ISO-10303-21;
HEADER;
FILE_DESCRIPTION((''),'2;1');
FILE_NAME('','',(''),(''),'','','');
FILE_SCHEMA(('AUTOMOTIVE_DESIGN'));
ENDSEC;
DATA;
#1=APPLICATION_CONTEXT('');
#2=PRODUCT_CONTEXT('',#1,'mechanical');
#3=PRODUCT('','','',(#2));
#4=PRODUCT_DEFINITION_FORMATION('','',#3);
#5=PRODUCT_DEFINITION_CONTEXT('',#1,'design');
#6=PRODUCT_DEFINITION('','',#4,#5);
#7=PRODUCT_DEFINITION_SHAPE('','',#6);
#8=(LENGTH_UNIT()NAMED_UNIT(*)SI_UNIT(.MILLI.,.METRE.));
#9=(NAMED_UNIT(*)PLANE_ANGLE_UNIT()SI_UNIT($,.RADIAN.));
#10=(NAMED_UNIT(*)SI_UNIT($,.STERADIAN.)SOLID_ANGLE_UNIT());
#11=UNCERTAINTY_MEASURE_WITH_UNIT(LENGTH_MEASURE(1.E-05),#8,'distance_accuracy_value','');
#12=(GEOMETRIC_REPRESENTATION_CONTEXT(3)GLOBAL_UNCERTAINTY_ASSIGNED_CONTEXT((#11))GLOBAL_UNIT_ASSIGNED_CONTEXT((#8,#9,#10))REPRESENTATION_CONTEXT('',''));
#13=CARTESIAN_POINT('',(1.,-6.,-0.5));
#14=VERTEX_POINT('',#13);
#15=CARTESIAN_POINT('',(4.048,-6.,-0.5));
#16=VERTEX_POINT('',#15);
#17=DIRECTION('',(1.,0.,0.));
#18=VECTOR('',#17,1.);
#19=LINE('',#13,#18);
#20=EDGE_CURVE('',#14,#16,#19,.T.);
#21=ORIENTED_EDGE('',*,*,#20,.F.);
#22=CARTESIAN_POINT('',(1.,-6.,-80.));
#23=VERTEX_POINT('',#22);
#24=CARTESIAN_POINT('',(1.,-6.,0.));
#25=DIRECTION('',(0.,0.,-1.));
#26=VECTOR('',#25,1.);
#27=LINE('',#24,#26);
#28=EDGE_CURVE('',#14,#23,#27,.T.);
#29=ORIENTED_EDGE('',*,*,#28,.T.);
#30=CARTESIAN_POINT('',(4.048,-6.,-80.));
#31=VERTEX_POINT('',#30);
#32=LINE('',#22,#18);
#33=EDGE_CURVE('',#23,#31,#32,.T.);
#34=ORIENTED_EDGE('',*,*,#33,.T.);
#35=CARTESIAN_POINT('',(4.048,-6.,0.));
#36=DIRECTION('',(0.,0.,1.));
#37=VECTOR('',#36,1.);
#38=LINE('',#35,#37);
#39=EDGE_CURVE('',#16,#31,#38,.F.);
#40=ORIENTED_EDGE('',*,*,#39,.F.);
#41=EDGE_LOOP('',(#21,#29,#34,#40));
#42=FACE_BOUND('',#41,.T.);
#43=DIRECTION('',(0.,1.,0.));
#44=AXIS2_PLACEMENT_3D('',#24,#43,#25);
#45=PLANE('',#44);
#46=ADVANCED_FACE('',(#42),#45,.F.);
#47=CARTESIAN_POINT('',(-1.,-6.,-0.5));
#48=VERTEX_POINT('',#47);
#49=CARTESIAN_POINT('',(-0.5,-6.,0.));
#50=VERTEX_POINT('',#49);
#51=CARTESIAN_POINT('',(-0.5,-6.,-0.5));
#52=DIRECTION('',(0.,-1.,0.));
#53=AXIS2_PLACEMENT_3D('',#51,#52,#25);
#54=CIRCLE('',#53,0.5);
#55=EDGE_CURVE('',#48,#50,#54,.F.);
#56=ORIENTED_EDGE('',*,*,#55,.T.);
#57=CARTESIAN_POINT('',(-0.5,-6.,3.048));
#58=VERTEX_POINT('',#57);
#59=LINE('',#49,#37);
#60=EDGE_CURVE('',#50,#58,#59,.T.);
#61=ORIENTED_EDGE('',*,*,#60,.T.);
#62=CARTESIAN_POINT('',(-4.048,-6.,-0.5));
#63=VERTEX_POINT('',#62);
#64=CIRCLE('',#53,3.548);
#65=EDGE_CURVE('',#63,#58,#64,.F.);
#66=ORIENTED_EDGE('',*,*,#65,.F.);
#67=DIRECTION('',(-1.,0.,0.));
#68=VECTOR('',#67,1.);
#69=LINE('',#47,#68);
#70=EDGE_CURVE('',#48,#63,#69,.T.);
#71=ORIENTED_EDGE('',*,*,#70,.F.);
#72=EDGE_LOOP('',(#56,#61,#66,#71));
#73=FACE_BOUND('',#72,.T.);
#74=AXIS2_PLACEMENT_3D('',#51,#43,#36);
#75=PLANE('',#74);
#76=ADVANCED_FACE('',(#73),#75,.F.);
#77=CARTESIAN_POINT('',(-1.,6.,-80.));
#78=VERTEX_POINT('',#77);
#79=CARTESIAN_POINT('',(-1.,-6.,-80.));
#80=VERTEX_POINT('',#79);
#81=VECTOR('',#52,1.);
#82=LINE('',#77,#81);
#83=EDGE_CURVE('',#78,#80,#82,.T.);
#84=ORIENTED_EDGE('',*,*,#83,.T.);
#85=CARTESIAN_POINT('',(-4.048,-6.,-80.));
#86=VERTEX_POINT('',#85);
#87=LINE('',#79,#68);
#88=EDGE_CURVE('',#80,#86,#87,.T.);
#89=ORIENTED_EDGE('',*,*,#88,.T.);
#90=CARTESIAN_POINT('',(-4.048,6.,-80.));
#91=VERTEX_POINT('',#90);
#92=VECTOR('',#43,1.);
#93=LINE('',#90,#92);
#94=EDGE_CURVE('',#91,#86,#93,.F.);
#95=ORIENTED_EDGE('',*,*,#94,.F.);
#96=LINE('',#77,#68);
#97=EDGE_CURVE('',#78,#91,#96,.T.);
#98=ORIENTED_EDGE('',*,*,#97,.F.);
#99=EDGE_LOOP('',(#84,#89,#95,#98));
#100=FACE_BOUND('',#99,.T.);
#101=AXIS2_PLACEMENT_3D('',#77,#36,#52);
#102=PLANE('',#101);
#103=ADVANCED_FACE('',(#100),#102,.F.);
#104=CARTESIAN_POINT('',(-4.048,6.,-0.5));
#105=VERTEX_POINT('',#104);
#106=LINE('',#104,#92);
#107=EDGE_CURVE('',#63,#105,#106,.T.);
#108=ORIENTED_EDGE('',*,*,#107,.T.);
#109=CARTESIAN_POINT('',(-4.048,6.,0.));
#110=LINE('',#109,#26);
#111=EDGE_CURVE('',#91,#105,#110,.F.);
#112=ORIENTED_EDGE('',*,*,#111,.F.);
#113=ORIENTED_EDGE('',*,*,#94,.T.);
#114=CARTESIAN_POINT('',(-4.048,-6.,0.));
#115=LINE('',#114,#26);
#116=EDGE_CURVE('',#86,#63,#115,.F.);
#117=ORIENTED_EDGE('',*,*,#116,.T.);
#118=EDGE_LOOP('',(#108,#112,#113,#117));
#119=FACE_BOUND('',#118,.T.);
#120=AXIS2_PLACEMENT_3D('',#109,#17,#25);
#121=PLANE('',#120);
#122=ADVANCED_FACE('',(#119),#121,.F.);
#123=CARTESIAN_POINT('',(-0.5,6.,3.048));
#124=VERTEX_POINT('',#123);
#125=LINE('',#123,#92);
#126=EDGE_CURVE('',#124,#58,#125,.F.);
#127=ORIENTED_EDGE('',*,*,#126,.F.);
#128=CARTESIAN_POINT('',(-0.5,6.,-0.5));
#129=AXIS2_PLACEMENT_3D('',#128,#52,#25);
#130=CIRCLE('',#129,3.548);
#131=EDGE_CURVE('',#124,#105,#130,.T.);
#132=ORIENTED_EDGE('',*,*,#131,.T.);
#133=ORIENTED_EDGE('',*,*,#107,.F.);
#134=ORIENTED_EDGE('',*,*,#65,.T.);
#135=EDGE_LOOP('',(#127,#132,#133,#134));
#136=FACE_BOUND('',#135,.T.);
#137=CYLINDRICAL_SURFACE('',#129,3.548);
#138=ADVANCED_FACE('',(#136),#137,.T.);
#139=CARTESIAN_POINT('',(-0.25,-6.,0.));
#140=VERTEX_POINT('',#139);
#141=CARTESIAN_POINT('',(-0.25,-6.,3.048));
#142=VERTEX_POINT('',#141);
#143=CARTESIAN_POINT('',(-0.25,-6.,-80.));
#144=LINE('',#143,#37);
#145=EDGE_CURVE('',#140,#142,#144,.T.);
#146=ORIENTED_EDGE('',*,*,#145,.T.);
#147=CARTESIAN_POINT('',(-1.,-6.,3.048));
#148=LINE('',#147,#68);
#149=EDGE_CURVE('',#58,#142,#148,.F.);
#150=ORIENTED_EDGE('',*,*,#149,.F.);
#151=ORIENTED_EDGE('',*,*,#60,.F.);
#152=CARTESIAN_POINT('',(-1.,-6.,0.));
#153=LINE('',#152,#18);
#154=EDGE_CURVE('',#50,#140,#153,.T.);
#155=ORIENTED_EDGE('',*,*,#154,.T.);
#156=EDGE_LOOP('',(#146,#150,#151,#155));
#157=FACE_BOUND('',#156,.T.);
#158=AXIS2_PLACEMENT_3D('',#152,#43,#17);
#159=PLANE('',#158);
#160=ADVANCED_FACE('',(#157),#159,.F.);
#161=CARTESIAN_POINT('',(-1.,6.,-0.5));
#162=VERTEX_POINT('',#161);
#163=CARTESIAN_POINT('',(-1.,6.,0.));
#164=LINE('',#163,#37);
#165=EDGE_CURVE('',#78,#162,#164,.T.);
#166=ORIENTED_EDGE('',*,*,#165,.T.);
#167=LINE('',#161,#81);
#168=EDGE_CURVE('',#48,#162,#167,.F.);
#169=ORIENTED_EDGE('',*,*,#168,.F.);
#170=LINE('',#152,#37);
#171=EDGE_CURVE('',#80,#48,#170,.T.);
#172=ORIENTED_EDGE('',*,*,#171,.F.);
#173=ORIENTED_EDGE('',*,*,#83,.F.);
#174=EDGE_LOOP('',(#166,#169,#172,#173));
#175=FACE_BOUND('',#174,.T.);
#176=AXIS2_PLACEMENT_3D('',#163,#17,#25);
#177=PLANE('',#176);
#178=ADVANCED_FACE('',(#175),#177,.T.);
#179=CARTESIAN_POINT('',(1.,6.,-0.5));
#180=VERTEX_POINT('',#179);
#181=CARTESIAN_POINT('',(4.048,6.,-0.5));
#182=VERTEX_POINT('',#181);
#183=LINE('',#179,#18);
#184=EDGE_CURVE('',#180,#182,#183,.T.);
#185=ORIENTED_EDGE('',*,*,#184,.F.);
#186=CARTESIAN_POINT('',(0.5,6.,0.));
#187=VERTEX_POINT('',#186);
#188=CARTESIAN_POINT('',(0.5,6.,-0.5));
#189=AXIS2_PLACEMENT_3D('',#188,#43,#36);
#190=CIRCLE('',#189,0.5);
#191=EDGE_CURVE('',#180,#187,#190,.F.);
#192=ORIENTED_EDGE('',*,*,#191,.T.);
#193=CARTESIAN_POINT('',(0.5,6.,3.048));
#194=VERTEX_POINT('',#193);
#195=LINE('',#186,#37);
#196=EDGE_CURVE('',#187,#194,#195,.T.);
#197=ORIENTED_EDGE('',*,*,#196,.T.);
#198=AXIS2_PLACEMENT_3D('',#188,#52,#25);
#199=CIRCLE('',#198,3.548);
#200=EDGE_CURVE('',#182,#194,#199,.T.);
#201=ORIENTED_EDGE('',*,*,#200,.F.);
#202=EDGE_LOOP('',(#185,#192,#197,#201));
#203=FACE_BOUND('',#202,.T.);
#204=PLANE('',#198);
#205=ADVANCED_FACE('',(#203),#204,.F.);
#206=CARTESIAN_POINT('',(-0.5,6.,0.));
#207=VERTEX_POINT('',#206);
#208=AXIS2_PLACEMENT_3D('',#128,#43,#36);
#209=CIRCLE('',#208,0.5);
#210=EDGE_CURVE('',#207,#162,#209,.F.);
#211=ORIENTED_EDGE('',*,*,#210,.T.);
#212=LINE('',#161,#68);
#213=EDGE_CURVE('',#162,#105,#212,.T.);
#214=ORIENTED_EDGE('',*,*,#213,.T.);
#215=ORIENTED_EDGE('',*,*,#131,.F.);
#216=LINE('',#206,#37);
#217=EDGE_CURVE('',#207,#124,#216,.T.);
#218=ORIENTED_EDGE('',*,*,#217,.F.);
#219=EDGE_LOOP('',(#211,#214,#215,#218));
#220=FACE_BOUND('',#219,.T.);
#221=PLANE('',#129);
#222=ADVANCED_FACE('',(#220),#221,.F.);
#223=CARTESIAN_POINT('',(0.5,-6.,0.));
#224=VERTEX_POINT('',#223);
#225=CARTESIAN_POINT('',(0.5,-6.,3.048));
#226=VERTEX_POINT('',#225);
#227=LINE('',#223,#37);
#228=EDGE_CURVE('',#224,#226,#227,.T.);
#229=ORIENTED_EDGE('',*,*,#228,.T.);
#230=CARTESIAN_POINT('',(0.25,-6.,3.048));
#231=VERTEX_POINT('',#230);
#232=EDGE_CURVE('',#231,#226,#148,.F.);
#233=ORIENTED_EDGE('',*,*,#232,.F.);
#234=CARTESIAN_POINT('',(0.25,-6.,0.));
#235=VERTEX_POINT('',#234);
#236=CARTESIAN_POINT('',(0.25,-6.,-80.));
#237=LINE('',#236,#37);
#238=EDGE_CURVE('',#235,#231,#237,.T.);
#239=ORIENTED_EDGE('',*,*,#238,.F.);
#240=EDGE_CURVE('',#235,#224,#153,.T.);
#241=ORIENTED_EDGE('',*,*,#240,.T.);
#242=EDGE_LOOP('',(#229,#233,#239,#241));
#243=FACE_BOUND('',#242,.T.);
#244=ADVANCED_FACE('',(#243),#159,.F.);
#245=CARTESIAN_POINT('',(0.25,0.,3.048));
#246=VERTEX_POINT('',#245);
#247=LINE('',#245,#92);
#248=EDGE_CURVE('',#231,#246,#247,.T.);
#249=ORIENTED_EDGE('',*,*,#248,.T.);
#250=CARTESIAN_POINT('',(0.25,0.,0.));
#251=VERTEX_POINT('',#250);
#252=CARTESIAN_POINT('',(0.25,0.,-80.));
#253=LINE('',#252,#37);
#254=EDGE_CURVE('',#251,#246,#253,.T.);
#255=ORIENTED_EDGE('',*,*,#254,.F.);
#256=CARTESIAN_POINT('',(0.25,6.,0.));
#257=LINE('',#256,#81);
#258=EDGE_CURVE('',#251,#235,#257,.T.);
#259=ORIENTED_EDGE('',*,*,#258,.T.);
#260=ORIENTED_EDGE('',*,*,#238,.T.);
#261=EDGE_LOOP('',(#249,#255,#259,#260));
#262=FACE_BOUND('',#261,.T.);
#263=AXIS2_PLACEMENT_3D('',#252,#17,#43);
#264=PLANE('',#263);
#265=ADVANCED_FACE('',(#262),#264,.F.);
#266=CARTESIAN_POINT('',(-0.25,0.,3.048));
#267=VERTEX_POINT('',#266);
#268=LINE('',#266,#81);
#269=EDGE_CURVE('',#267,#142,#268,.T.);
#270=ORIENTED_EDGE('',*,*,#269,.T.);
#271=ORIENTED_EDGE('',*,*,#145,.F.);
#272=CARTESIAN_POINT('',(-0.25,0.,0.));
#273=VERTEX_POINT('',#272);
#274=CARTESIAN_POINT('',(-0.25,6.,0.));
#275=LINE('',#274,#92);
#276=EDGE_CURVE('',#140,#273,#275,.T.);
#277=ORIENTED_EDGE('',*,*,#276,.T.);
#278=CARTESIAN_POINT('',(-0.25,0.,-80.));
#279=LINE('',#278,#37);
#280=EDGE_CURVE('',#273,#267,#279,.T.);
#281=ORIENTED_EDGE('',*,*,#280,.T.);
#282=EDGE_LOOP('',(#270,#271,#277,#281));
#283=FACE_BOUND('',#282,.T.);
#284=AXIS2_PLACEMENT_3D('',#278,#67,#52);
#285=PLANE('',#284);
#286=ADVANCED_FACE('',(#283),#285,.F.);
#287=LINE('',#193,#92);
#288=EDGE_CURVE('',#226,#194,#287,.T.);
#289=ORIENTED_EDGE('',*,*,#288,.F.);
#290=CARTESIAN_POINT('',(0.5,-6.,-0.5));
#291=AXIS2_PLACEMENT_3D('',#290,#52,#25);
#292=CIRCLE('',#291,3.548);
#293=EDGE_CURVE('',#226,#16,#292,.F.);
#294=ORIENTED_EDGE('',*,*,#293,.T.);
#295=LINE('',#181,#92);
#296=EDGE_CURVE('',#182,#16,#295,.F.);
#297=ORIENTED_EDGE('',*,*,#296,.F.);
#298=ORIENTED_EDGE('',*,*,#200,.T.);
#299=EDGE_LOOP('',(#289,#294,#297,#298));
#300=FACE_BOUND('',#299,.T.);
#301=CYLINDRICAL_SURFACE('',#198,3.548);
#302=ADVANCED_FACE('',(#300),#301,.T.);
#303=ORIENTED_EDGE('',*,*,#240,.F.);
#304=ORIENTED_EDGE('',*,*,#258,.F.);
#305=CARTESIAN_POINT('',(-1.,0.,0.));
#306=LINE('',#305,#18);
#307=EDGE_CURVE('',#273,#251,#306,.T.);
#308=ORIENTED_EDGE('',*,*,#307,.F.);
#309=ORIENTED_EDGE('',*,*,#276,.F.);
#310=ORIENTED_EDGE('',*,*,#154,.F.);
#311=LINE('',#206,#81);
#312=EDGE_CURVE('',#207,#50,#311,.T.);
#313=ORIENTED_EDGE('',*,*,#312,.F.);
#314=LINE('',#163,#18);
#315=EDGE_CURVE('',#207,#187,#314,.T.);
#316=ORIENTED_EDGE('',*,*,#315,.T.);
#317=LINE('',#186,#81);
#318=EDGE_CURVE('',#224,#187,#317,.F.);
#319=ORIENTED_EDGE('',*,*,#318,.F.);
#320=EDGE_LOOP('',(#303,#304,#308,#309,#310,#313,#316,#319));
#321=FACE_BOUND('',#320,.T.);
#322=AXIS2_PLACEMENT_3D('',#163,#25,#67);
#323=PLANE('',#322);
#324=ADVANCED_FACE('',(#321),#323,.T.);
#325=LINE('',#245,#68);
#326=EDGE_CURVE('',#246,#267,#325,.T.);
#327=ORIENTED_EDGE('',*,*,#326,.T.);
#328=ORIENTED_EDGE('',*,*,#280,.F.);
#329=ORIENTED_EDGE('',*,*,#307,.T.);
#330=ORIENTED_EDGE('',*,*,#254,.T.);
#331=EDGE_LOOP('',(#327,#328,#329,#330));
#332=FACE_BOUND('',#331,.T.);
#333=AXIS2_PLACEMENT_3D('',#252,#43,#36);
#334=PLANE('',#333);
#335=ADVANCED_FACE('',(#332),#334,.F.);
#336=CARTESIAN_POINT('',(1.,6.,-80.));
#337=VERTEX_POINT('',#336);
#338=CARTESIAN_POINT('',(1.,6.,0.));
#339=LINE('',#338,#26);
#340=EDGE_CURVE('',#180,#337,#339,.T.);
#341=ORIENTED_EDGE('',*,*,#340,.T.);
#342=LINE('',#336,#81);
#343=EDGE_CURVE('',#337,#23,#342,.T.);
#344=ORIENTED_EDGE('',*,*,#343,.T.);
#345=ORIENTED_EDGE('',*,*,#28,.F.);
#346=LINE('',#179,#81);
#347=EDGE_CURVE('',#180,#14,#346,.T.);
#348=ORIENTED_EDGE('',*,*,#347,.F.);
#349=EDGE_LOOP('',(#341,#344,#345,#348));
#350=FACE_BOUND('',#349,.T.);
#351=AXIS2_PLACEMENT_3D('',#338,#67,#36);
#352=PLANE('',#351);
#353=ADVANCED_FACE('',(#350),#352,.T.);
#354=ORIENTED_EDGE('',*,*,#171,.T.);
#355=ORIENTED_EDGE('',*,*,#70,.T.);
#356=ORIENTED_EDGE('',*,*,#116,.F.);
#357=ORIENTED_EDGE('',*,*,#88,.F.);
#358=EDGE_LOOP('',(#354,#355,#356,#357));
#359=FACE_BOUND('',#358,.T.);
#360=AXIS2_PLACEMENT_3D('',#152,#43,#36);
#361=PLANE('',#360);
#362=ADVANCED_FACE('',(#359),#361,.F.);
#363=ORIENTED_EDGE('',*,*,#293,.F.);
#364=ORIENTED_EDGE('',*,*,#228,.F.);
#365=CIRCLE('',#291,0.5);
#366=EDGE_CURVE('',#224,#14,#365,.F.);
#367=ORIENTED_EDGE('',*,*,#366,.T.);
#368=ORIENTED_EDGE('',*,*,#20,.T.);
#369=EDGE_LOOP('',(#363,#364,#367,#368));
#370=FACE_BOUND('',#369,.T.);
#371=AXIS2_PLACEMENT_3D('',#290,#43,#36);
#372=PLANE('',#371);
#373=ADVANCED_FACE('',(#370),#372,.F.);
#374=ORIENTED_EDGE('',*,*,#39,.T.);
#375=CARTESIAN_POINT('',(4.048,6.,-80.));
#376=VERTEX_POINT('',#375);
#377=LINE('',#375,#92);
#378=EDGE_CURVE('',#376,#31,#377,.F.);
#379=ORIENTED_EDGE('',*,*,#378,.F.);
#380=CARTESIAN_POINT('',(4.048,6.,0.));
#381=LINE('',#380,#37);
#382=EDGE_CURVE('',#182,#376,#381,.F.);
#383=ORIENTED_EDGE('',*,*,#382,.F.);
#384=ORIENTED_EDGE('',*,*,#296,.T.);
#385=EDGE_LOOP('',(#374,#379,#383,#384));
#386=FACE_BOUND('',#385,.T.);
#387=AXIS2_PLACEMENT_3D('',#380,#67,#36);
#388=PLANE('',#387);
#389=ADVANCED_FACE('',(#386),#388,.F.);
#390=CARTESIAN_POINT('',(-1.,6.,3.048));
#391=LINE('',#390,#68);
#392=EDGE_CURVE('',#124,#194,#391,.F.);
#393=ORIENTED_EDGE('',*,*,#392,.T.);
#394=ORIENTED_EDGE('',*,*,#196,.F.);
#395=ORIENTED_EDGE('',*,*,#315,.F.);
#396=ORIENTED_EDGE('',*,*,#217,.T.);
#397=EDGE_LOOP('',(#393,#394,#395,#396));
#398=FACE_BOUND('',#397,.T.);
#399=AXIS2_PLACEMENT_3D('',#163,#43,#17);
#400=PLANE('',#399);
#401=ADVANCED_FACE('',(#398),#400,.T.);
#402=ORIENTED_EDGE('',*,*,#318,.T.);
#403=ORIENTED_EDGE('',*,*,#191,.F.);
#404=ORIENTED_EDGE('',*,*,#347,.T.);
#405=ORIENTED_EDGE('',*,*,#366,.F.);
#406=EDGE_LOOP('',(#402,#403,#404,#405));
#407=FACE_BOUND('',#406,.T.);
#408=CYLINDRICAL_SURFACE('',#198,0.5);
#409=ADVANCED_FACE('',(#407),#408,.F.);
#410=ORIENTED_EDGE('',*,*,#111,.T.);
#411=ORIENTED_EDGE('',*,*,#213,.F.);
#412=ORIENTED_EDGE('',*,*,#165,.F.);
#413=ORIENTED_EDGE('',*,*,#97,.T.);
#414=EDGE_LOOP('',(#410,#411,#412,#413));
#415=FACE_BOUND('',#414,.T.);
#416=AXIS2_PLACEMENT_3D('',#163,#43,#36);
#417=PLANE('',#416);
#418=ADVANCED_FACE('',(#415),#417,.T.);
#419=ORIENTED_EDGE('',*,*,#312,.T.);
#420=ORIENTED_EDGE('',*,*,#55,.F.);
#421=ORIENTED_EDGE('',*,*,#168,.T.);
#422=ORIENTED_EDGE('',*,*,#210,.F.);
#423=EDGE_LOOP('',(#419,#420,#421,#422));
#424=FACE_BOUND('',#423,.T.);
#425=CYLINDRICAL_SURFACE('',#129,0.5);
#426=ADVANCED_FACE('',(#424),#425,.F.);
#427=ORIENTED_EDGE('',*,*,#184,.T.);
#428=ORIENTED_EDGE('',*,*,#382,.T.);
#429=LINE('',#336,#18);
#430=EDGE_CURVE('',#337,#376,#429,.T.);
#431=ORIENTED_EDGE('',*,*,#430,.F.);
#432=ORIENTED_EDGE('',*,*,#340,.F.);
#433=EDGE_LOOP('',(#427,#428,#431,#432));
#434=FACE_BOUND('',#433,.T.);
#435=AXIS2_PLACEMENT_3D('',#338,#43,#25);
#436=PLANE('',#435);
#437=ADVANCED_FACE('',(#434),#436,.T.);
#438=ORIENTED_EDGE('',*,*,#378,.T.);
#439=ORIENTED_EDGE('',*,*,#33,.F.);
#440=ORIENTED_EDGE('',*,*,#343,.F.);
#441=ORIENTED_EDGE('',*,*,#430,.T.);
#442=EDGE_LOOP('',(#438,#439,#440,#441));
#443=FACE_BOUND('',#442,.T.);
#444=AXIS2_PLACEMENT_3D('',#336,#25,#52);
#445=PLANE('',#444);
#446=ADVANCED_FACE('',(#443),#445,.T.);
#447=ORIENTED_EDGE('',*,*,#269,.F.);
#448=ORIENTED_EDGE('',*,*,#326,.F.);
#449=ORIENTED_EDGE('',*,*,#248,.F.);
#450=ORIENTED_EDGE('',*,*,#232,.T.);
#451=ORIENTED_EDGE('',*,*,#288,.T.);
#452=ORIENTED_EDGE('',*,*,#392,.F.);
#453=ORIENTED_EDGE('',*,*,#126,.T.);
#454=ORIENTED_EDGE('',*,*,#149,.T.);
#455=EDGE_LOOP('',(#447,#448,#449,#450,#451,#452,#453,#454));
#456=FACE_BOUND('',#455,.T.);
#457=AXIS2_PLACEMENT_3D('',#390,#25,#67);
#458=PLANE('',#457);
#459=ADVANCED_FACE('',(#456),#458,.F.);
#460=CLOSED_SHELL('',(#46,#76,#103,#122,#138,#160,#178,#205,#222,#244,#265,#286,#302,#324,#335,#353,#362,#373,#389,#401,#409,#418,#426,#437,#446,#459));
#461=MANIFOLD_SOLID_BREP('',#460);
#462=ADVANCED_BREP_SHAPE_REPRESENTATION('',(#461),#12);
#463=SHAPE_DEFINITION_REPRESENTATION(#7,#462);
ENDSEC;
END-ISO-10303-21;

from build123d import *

# Parameters (mm, degrees)
SKETCH2_W               = 2
SKETCH2_H               = 80
BOSS_EXTRUDE1_DEPTH     = 6
CONVERT_SOLID1_START    = -6
CONVERT_SOLID1_DEPTH    = 12
CONVERT_SOLID1_2_DEPTH  = 12
CUT_EXTRUDE1_DEPTH      = 81.326747127
CUT_EXTRUDE1_DEPTH_BACK = 81.326747127
SKETCH7_W               = 0.5
SKETCH7_H               = 6


# Read off the part's stored shape, not the designer's step: SharpBend1
with BuildPart() as part:
    # Sketch2 → Boss-Extrude1 (new, symmetric)
    with BuildSketch(Plane(origin=(0, 0, 0), x_dir=(1, 0, 0), z_dir=(0, 1, 0))):
        with Locations((0, 40)):
            Rectangle(SKETCH2_W, SKETCH2_H)
    extrude(amount=BOSS_EXTRUDE1_DEPTH, both=True)

    # Convert-Solid1 outline → Convert-Solid1 (cut)
    with BuildSketch(Plane(origin=(0, 0, 0), x_dir=(1, 0, 0), z_dir=(0, 1, 0)).offset(CONVERT_SOLID1_START)):
        with BuildLine():
            Line((1, 0.5), (1, 80))
            Line((1, 80), (-1, 80))
            Line((-1, 80), (-1, 0.5))
            ThreePointArc((-1, 0.5), (-0.853553391, 0.146446609), (-0.5, 0))
            Line((-0.5, 0), (0.5, 0))
            ThreePointArc((0.5, 0), (0.853553391, 0.146446609), (1, 0.5))
        make_face()
    extrude(amount=CONVERT_SOLID1_DEPTH, mode=Mode.SUBTRACT)

    # Convert-Solid1 2 outline → Convert-Solid1 2 (add)
    with BuildSketch(Plane(origin=(0, 0, 0), x_dir=(1, 0, 0), z_dir=(0, 1, 0)).offset(CONVERT_SOLID1_START)):
        with BuildLine():
            Line((4.048, 0.5), (4.048, 80))
            Line((4.048, 80), (1, 80))
            Line((1, 80), (1, 0))
            Line((1, 0), (-1, 0))
            Line((-1, 0), (-1, 80))
            Line((-1, 80), (-4.048, 80))
            Line((-4.048, 80), (-4.048, 0.5))
            ThreePointArc((-4.048, 0.5), (-3.00881486, -2.00881486), (-0.5, -3.048))
            Line((-0.5, -3.048), (0.5, -3.048))
            ThreePointArc((0.5, -3.048), (3.00881486, -2.00881486), (4.048, 0.5))
        make_face()
    extrude(amount=CONVERT_SOLID1_2_DEPTH)

    # Sketch7 → Cut-Extrude1 (cut, two sides: drawn at the far end of the back side and taken through both)
    with BuildSketch(Plane.XY.offset(-CUT_EXTRUDE1_DEPTH_BACK)):
        with Locations((0, -3)):
            Rectangle(SKETCH7_W, SKETCH7_H)
    extrude(amount=CUT_EXTRUDE1_DEPTH + CUT_EXTRUDE1_DEPTH_BACK, mode=Mode.SUBTRACT)


solid = part.part
